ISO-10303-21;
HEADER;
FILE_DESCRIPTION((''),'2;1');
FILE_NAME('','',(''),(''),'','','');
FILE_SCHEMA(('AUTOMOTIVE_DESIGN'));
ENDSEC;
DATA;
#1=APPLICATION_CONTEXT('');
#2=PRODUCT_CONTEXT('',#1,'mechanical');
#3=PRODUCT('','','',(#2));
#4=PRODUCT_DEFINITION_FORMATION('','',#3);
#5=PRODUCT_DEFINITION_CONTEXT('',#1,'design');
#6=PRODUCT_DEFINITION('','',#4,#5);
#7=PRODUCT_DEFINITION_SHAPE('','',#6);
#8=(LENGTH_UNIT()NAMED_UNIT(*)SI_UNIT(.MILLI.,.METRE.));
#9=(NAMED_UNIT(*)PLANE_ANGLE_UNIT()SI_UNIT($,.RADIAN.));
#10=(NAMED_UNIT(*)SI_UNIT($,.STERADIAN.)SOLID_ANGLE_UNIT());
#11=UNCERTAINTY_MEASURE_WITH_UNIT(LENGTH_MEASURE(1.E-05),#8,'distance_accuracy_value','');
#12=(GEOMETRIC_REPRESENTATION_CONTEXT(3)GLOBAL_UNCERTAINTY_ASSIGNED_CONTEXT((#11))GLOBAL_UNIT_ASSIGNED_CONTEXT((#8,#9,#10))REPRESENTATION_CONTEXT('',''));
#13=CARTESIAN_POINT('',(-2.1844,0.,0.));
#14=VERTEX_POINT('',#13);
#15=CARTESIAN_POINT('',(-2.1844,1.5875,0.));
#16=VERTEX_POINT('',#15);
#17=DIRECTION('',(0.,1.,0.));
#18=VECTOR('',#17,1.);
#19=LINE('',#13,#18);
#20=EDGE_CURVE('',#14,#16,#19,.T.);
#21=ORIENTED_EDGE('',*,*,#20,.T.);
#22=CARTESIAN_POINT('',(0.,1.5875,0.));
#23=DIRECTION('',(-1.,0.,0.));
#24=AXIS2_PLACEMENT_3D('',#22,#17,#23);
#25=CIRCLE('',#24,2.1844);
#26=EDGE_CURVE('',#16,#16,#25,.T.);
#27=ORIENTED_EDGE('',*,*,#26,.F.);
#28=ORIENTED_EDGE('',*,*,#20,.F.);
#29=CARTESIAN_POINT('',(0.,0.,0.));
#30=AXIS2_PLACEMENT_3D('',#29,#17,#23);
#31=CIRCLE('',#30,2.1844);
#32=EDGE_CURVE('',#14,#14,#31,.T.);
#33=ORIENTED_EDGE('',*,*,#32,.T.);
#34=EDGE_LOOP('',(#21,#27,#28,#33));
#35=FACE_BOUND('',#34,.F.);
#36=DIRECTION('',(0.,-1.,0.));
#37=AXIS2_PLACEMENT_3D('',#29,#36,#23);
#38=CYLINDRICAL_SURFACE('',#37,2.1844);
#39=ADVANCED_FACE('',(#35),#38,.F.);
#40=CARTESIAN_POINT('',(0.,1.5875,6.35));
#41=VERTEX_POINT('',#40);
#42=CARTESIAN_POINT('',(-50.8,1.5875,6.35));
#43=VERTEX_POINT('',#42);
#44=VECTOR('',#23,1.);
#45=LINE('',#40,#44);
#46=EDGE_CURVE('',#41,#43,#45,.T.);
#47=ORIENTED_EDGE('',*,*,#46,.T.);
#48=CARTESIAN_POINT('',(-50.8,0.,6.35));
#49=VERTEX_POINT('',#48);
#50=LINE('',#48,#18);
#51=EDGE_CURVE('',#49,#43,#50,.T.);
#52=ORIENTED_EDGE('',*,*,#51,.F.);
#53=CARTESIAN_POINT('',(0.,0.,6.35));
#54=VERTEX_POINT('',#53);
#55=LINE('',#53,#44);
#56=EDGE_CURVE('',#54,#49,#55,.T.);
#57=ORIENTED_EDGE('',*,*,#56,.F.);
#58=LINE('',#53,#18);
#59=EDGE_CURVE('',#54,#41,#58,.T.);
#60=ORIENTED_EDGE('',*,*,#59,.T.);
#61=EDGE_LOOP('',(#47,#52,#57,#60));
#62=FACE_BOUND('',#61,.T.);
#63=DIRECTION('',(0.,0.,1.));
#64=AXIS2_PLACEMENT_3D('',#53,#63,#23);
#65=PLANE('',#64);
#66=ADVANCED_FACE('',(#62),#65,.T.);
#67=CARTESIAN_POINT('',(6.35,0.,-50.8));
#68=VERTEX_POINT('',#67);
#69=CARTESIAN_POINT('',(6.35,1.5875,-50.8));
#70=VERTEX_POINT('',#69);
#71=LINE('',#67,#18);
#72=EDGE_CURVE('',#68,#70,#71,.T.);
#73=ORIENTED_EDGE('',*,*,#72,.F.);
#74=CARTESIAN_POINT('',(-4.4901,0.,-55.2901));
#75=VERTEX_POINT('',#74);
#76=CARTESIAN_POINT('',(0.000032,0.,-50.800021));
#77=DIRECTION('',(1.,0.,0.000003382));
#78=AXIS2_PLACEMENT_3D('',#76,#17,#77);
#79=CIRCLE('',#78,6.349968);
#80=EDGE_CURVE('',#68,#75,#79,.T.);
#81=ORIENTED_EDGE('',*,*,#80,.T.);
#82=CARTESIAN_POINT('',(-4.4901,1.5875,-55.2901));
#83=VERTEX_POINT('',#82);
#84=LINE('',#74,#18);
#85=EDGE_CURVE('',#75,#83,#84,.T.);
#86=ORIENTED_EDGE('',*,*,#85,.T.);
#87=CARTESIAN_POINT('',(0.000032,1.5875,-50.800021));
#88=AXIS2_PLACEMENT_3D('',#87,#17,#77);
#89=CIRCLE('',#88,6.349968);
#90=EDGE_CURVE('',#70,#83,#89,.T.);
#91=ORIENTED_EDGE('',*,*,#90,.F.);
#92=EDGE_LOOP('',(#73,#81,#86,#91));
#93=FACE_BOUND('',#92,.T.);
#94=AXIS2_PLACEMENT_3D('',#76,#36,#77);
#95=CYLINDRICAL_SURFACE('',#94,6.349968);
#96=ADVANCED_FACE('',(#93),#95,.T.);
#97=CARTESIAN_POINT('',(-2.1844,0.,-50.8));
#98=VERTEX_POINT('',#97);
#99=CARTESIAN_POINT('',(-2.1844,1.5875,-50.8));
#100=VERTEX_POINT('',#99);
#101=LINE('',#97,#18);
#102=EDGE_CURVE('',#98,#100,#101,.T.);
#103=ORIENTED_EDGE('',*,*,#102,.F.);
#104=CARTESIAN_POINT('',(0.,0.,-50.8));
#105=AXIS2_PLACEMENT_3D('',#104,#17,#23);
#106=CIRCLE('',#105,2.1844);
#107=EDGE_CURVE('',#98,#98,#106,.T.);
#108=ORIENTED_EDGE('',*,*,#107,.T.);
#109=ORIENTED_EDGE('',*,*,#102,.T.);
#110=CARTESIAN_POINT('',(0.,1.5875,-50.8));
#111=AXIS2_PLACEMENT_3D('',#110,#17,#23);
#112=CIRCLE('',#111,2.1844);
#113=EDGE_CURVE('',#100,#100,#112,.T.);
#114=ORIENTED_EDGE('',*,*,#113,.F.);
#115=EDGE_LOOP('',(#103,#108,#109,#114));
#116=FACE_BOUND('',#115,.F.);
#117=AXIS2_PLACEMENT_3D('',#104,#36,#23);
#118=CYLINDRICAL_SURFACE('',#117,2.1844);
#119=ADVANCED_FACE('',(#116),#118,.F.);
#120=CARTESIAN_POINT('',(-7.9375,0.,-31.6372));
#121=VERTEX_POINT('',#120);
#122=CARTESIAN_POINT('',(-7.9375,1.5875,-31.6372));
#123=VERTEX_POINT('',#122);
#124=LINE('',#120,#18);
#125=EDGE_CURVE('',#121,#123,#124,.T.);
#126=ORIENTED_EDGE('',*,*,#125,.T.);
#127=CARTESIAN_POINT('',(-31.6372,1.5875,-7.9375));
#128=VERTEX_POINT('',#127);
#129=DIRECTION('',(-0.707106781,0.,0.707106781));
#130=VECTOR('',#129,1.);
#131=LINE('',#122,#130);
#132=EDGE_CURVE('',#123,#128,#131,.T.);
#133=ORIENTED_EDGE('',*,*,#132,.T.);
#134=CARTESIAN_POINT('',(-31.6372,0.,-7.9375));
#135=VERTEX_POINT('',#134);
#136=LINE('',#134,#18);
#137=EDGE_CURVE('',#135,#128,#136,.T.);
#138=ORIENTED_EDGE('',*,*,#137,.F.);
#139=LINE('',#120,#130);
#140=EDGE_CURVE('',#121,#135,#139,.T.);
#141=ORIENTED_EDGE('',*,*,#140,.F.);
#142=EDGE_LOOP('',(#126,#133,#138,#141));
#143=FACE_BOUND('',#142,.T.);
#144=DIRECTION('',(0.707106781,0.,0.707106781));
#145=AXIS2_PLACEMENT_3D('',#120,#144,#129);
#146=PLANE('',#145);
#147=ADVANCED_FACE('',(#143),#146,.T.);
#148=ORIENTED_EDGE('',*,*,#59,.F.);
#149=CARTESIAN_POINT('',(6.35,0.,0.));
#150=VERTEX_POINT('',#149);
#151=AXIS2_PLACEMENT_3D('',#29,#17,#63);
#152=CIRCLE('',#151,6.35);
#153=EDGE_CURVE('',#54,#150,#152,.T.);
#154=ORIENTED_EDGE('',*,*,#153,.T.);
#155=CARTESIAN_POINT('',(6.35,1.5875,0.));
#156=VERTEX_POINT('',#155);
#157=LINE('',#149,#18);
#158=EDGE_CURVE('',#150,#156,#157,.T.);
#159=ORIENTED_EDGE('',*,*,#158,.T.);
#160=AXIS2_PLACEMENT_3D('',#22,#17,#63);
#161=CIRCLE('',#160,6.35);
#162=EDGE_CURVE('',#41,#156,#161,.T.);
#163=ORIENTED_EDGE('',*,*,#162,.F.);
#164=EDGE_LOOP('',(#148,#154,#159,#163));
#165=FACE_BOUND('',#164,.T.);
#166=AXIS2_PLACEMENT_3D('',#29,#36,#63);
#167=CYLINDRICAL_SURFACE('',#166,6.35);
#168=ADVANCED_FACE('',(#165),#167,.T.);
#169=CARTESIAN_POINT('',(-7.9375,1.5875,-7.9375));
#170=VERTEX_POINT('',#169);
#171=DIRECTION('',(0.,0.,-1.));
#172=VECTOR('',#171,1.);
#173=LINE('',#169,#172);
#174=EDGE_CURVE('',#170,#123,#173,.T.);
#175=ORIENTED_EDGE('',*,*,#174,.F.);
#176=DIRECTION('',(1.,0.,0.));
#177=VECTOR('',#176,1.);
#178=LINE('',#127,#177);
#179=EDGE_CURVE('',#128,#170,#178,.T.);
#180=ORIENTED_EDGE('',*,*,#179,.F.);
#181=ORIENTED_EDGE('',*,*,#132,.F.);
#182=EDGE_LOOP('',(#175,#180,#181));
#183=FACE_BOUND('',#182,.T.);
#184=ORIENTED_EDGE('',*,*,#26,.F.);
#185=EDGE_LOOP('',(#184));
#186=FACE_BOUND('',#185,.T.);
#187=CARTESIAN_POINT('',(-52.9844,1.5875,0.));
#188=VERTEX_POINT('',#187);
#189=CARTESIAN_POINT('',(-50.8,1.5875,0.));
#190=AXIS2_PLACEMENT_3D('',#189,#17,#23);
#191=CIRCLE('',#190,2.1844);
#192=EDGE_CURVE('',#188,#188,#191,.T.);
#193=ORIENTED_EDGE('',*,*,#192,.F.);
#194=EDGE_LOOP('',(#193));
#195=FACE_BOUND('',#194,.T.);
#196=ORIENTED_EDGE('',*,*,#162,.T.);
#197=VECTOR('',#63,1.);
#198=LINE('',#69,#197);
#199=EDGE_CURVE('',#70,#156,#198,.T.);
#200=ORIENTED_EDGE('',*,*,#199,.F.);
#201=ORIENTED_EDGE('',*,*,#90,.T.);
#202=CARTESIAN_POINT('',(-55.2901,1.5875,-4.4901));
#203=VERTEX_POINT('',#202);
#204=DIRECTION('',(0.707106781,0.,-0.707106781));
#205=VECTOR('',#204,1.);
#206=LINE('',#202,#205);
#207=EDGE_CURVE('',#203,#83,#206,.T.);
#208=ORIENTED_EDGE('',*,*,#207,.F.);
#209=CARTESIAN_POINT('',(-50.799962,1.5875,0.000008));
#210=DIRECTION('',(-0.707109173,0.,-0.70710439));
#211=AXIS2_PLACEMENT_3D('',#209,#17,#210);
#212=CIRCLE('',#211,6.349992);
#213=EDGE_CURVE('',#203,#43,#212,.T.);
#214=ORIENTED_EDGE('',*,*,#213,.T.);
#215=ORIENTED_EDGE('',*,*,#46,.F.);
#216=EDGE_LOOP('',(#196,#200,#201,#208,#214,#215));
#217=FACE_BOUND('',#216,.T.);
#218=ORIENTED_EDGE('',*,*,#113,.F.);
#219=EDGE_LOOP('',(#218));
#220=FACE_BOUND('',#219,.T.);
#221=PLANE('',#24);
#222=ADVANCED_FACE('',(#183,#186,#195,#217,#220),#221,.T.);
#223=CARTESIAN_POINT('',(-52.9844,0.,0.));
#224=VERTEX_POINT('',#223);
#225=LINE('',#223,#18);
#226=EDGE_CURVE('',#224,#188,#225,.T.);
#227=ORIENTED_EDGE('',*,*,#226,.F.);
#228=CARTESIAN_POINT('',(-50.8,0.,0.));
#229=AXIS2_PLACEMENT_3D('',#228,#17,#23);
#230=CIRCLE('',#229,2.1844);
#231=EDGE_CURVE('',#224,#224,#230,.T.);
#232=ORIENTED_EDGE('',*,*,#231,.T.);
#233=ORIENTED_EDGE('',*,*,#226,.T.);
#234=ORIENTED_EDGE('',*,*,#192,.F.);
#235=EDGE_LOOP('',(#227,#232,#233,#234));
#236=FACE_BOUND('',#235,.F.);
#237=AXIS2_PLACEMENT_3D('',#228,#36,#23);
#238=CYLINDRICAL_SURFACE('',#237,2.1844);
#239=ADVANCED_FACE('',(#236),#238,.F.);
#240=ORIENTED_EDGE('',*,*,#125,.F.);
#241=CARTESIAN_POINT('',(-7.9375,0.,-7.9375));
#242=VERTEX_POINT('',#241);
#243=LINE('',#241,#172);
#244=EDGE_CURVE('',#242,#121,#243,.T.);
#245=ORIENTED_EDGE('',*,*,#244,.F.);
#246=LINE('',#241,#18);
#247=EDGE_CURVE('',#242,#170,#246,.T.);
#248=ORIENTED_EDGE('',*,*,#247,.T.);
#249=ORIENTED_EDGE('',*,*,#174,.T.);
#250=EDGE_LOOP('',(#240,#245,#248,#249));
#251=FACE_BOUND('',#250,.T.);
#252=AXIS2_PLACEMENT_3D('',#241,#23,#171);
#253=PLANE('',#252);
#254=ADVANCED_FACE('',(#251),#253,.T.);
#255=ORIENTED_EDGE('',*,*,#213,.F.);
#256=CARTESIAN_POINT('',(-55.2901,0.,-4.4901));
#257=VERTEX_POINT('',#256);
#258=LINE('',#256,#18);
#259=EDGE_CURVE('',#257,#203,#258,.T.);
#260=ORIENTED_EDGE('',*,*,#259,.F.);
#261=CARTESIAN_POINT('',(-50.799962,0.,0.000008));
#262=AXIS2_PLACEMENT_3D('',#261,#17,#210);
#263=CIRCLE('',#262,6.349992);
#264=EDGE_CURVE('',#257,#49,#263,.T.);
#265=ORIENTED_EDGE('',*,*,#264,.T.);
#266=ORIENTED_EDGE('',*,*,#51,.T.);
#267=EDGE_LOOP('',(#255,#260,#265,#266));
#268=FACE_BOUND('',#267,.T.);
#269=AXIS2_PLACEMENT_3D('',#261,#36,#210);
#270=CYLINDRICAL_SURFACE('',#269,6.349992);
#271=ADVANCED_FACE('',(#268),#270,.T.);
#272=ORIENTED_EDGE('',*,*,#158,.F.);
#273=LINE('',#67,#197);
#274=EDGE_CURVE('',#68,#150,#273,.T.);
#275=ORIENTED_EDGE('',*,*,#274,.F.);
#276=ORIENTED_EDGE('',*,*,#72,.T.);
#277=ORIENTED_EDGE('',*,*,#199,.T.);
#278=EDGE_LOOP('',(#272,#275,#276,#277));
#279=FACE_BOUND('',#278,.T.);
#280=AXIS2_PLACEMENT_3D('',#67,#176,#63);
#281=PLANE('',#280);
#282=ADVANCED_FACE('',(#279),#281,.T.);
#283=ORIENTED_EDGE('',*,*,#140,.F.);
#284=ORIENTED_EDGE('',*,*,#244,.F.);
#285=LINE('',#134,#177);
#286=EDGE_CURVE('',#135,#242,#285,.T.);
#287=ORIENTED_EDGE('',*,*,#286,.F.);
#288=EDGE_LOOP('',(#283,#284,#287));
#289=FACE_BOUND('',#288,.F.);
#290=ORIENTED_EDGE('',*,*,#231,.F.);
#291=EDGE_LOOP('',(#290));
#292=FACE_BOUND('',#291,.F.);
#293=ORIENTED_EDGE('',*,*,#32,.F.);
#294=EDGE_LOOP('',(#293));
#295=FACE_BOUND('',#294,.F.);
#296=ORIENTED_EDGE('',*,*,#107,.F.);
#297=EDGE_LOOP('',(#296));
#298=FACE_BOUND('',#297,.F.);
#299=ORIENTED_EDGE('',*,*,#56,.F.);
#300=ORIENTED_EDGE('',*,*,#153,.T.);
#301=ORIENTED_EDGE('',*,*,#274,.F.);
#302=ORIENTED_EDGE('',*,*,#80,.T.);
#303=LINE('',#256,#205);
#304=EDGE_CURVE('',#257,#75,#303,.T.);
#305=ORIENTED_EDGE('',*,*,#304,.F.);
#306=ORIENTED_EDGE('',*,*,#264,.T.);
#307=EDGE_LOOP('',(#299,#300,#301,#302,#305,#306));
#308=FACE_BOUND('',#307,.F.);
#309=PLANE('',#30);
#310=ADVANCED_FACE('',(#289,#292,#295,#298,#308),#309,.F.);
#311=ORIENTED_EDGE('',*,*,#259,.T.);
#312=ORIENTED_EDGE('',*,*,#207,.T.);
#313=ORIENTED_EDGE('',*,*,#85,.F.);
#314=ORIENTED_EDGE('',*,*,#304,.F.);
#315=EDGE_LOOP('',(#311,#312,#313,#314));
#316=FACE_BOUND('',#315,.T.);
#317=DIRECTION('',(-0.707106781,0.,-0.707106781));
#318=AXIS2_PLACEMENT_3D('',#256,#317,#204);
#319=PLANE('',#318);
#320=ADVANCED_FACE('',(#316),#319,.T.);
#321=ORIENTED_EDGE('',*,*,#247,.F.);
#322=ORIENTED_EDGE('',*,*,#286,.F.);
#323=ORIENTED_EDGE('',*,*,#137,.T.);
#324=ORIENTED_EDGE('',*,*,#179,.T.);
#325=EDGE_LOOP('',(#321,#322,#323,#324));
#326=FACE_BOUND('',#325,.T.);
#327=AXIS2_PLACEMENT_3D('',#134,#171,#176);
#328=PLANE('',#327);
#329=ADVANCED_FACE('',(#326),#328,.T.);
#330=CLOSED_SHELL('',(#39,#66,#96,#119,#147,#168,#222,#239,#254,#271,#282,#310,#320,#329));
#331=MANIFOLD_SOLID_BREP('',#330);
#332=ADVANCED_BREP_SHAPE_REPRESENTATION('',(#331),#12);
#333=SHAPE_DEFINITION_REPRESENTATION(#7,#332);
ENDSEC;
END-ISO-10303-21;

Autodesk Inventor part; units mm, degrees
ref_plane "YZ Plane" through (0, 0, 0) normal (1, 0, 0) x (0, 1, 0)
ref_plane "XZ Plane" through (0, 0, 0) normal (0, 1, 0) x (-1, 0, 0)
ref_plane "XY Plane" through (0, 0, 0) normal (0, 0, 1) x (1, 0, 0)
sketch "main" plane through (0, 0, 0) normal (0, 0, 1) x (1, 0, 0)
  circle A0 centre (-24.2926, 27.4457) radius 2.1844
  circle A1 centre (-24.2926, -23.3543) radius 2.1844
  circle A2 centre (26.5074, 27.4457) radius 2.1844
  arc A3 (-30.6426, -23.3543) -> (-19.8025, -27.8444) centre (-24.2926, -23.3543) ccw
  arc A4 (30.9975, 22.9556) -> (26.5074, 33.7957) centre (26.5074, 27.4457) ccw
  arc A5 (-24.2926, 33.7957) -> (-30.6426, 27.4457) centre (-24.2926, 27.4457) ccw
  line L0 (-30.6426, -23.3543) -> (-30.6426, 27.4457)
  line L1 (-24.2926, 33.7957) -> (26.5074, 33.7957)
  line L2 (30.9975, 22.9556) -> (-19.8025, -27.8444)
  line L3 (-16.3551, -4.1915) -> (7.3446, 19.5082)
  line L4 (7.3446, 19.5082) -> (-16.3551, 19.5082)
  line L5 (-16.3551, 19.5082) -> (-16.3551, -4.1915)
  point P0 (-7.9432, 11.0963)
  dimension "d0" = 12.7
  dimension "d1" = 12.7
  dimension "d2" = 12.7
  dimension "d3" = 14.2875
sketch "Sketch1" plane through (0, 0, 0) normal (0, 1, 0) x (-1, 0, 0)
  circle A0 centre (0, 0) radius 2.1844
  circle A1 centre (0, -50.8) radius 2.1844
  circle A2 centre (50.8, 0) radius 2.1844
  arc A3 (-6.35, -50.8) -> (4.4901, -55.2901) centre (0, -50.8) ccw
  arc A4 (55.2901, -4.4901) -> (50.8, 6.35) centre (50.8, 0) ccw
  arc A5 (0, 6.35) -> (-6.35, 0) centre (0, 0) ccw
  line L0 (-6.35, -50.8) -> (-6.35, 0)
  line L1 (0, 6.35) -> (50.8, 6.35)
  line L2 (55.2901, -4.4901) -> (4.4901, -55.2901)
  line L3 (7.9375, -31.6372) -> (31.6372, -7.9375)
  line L4 (31.6372, -7.9375) -> (7.9375, -7.9375)
  line L5 (7.9375, -7.9375) -> (7.9375, -31.6372)
extrude "Extrusion1" add sketch "Sketch1" along normal blind 1.5875
properties part number "Triangle Gusset" material "Acetal Resin, White"
